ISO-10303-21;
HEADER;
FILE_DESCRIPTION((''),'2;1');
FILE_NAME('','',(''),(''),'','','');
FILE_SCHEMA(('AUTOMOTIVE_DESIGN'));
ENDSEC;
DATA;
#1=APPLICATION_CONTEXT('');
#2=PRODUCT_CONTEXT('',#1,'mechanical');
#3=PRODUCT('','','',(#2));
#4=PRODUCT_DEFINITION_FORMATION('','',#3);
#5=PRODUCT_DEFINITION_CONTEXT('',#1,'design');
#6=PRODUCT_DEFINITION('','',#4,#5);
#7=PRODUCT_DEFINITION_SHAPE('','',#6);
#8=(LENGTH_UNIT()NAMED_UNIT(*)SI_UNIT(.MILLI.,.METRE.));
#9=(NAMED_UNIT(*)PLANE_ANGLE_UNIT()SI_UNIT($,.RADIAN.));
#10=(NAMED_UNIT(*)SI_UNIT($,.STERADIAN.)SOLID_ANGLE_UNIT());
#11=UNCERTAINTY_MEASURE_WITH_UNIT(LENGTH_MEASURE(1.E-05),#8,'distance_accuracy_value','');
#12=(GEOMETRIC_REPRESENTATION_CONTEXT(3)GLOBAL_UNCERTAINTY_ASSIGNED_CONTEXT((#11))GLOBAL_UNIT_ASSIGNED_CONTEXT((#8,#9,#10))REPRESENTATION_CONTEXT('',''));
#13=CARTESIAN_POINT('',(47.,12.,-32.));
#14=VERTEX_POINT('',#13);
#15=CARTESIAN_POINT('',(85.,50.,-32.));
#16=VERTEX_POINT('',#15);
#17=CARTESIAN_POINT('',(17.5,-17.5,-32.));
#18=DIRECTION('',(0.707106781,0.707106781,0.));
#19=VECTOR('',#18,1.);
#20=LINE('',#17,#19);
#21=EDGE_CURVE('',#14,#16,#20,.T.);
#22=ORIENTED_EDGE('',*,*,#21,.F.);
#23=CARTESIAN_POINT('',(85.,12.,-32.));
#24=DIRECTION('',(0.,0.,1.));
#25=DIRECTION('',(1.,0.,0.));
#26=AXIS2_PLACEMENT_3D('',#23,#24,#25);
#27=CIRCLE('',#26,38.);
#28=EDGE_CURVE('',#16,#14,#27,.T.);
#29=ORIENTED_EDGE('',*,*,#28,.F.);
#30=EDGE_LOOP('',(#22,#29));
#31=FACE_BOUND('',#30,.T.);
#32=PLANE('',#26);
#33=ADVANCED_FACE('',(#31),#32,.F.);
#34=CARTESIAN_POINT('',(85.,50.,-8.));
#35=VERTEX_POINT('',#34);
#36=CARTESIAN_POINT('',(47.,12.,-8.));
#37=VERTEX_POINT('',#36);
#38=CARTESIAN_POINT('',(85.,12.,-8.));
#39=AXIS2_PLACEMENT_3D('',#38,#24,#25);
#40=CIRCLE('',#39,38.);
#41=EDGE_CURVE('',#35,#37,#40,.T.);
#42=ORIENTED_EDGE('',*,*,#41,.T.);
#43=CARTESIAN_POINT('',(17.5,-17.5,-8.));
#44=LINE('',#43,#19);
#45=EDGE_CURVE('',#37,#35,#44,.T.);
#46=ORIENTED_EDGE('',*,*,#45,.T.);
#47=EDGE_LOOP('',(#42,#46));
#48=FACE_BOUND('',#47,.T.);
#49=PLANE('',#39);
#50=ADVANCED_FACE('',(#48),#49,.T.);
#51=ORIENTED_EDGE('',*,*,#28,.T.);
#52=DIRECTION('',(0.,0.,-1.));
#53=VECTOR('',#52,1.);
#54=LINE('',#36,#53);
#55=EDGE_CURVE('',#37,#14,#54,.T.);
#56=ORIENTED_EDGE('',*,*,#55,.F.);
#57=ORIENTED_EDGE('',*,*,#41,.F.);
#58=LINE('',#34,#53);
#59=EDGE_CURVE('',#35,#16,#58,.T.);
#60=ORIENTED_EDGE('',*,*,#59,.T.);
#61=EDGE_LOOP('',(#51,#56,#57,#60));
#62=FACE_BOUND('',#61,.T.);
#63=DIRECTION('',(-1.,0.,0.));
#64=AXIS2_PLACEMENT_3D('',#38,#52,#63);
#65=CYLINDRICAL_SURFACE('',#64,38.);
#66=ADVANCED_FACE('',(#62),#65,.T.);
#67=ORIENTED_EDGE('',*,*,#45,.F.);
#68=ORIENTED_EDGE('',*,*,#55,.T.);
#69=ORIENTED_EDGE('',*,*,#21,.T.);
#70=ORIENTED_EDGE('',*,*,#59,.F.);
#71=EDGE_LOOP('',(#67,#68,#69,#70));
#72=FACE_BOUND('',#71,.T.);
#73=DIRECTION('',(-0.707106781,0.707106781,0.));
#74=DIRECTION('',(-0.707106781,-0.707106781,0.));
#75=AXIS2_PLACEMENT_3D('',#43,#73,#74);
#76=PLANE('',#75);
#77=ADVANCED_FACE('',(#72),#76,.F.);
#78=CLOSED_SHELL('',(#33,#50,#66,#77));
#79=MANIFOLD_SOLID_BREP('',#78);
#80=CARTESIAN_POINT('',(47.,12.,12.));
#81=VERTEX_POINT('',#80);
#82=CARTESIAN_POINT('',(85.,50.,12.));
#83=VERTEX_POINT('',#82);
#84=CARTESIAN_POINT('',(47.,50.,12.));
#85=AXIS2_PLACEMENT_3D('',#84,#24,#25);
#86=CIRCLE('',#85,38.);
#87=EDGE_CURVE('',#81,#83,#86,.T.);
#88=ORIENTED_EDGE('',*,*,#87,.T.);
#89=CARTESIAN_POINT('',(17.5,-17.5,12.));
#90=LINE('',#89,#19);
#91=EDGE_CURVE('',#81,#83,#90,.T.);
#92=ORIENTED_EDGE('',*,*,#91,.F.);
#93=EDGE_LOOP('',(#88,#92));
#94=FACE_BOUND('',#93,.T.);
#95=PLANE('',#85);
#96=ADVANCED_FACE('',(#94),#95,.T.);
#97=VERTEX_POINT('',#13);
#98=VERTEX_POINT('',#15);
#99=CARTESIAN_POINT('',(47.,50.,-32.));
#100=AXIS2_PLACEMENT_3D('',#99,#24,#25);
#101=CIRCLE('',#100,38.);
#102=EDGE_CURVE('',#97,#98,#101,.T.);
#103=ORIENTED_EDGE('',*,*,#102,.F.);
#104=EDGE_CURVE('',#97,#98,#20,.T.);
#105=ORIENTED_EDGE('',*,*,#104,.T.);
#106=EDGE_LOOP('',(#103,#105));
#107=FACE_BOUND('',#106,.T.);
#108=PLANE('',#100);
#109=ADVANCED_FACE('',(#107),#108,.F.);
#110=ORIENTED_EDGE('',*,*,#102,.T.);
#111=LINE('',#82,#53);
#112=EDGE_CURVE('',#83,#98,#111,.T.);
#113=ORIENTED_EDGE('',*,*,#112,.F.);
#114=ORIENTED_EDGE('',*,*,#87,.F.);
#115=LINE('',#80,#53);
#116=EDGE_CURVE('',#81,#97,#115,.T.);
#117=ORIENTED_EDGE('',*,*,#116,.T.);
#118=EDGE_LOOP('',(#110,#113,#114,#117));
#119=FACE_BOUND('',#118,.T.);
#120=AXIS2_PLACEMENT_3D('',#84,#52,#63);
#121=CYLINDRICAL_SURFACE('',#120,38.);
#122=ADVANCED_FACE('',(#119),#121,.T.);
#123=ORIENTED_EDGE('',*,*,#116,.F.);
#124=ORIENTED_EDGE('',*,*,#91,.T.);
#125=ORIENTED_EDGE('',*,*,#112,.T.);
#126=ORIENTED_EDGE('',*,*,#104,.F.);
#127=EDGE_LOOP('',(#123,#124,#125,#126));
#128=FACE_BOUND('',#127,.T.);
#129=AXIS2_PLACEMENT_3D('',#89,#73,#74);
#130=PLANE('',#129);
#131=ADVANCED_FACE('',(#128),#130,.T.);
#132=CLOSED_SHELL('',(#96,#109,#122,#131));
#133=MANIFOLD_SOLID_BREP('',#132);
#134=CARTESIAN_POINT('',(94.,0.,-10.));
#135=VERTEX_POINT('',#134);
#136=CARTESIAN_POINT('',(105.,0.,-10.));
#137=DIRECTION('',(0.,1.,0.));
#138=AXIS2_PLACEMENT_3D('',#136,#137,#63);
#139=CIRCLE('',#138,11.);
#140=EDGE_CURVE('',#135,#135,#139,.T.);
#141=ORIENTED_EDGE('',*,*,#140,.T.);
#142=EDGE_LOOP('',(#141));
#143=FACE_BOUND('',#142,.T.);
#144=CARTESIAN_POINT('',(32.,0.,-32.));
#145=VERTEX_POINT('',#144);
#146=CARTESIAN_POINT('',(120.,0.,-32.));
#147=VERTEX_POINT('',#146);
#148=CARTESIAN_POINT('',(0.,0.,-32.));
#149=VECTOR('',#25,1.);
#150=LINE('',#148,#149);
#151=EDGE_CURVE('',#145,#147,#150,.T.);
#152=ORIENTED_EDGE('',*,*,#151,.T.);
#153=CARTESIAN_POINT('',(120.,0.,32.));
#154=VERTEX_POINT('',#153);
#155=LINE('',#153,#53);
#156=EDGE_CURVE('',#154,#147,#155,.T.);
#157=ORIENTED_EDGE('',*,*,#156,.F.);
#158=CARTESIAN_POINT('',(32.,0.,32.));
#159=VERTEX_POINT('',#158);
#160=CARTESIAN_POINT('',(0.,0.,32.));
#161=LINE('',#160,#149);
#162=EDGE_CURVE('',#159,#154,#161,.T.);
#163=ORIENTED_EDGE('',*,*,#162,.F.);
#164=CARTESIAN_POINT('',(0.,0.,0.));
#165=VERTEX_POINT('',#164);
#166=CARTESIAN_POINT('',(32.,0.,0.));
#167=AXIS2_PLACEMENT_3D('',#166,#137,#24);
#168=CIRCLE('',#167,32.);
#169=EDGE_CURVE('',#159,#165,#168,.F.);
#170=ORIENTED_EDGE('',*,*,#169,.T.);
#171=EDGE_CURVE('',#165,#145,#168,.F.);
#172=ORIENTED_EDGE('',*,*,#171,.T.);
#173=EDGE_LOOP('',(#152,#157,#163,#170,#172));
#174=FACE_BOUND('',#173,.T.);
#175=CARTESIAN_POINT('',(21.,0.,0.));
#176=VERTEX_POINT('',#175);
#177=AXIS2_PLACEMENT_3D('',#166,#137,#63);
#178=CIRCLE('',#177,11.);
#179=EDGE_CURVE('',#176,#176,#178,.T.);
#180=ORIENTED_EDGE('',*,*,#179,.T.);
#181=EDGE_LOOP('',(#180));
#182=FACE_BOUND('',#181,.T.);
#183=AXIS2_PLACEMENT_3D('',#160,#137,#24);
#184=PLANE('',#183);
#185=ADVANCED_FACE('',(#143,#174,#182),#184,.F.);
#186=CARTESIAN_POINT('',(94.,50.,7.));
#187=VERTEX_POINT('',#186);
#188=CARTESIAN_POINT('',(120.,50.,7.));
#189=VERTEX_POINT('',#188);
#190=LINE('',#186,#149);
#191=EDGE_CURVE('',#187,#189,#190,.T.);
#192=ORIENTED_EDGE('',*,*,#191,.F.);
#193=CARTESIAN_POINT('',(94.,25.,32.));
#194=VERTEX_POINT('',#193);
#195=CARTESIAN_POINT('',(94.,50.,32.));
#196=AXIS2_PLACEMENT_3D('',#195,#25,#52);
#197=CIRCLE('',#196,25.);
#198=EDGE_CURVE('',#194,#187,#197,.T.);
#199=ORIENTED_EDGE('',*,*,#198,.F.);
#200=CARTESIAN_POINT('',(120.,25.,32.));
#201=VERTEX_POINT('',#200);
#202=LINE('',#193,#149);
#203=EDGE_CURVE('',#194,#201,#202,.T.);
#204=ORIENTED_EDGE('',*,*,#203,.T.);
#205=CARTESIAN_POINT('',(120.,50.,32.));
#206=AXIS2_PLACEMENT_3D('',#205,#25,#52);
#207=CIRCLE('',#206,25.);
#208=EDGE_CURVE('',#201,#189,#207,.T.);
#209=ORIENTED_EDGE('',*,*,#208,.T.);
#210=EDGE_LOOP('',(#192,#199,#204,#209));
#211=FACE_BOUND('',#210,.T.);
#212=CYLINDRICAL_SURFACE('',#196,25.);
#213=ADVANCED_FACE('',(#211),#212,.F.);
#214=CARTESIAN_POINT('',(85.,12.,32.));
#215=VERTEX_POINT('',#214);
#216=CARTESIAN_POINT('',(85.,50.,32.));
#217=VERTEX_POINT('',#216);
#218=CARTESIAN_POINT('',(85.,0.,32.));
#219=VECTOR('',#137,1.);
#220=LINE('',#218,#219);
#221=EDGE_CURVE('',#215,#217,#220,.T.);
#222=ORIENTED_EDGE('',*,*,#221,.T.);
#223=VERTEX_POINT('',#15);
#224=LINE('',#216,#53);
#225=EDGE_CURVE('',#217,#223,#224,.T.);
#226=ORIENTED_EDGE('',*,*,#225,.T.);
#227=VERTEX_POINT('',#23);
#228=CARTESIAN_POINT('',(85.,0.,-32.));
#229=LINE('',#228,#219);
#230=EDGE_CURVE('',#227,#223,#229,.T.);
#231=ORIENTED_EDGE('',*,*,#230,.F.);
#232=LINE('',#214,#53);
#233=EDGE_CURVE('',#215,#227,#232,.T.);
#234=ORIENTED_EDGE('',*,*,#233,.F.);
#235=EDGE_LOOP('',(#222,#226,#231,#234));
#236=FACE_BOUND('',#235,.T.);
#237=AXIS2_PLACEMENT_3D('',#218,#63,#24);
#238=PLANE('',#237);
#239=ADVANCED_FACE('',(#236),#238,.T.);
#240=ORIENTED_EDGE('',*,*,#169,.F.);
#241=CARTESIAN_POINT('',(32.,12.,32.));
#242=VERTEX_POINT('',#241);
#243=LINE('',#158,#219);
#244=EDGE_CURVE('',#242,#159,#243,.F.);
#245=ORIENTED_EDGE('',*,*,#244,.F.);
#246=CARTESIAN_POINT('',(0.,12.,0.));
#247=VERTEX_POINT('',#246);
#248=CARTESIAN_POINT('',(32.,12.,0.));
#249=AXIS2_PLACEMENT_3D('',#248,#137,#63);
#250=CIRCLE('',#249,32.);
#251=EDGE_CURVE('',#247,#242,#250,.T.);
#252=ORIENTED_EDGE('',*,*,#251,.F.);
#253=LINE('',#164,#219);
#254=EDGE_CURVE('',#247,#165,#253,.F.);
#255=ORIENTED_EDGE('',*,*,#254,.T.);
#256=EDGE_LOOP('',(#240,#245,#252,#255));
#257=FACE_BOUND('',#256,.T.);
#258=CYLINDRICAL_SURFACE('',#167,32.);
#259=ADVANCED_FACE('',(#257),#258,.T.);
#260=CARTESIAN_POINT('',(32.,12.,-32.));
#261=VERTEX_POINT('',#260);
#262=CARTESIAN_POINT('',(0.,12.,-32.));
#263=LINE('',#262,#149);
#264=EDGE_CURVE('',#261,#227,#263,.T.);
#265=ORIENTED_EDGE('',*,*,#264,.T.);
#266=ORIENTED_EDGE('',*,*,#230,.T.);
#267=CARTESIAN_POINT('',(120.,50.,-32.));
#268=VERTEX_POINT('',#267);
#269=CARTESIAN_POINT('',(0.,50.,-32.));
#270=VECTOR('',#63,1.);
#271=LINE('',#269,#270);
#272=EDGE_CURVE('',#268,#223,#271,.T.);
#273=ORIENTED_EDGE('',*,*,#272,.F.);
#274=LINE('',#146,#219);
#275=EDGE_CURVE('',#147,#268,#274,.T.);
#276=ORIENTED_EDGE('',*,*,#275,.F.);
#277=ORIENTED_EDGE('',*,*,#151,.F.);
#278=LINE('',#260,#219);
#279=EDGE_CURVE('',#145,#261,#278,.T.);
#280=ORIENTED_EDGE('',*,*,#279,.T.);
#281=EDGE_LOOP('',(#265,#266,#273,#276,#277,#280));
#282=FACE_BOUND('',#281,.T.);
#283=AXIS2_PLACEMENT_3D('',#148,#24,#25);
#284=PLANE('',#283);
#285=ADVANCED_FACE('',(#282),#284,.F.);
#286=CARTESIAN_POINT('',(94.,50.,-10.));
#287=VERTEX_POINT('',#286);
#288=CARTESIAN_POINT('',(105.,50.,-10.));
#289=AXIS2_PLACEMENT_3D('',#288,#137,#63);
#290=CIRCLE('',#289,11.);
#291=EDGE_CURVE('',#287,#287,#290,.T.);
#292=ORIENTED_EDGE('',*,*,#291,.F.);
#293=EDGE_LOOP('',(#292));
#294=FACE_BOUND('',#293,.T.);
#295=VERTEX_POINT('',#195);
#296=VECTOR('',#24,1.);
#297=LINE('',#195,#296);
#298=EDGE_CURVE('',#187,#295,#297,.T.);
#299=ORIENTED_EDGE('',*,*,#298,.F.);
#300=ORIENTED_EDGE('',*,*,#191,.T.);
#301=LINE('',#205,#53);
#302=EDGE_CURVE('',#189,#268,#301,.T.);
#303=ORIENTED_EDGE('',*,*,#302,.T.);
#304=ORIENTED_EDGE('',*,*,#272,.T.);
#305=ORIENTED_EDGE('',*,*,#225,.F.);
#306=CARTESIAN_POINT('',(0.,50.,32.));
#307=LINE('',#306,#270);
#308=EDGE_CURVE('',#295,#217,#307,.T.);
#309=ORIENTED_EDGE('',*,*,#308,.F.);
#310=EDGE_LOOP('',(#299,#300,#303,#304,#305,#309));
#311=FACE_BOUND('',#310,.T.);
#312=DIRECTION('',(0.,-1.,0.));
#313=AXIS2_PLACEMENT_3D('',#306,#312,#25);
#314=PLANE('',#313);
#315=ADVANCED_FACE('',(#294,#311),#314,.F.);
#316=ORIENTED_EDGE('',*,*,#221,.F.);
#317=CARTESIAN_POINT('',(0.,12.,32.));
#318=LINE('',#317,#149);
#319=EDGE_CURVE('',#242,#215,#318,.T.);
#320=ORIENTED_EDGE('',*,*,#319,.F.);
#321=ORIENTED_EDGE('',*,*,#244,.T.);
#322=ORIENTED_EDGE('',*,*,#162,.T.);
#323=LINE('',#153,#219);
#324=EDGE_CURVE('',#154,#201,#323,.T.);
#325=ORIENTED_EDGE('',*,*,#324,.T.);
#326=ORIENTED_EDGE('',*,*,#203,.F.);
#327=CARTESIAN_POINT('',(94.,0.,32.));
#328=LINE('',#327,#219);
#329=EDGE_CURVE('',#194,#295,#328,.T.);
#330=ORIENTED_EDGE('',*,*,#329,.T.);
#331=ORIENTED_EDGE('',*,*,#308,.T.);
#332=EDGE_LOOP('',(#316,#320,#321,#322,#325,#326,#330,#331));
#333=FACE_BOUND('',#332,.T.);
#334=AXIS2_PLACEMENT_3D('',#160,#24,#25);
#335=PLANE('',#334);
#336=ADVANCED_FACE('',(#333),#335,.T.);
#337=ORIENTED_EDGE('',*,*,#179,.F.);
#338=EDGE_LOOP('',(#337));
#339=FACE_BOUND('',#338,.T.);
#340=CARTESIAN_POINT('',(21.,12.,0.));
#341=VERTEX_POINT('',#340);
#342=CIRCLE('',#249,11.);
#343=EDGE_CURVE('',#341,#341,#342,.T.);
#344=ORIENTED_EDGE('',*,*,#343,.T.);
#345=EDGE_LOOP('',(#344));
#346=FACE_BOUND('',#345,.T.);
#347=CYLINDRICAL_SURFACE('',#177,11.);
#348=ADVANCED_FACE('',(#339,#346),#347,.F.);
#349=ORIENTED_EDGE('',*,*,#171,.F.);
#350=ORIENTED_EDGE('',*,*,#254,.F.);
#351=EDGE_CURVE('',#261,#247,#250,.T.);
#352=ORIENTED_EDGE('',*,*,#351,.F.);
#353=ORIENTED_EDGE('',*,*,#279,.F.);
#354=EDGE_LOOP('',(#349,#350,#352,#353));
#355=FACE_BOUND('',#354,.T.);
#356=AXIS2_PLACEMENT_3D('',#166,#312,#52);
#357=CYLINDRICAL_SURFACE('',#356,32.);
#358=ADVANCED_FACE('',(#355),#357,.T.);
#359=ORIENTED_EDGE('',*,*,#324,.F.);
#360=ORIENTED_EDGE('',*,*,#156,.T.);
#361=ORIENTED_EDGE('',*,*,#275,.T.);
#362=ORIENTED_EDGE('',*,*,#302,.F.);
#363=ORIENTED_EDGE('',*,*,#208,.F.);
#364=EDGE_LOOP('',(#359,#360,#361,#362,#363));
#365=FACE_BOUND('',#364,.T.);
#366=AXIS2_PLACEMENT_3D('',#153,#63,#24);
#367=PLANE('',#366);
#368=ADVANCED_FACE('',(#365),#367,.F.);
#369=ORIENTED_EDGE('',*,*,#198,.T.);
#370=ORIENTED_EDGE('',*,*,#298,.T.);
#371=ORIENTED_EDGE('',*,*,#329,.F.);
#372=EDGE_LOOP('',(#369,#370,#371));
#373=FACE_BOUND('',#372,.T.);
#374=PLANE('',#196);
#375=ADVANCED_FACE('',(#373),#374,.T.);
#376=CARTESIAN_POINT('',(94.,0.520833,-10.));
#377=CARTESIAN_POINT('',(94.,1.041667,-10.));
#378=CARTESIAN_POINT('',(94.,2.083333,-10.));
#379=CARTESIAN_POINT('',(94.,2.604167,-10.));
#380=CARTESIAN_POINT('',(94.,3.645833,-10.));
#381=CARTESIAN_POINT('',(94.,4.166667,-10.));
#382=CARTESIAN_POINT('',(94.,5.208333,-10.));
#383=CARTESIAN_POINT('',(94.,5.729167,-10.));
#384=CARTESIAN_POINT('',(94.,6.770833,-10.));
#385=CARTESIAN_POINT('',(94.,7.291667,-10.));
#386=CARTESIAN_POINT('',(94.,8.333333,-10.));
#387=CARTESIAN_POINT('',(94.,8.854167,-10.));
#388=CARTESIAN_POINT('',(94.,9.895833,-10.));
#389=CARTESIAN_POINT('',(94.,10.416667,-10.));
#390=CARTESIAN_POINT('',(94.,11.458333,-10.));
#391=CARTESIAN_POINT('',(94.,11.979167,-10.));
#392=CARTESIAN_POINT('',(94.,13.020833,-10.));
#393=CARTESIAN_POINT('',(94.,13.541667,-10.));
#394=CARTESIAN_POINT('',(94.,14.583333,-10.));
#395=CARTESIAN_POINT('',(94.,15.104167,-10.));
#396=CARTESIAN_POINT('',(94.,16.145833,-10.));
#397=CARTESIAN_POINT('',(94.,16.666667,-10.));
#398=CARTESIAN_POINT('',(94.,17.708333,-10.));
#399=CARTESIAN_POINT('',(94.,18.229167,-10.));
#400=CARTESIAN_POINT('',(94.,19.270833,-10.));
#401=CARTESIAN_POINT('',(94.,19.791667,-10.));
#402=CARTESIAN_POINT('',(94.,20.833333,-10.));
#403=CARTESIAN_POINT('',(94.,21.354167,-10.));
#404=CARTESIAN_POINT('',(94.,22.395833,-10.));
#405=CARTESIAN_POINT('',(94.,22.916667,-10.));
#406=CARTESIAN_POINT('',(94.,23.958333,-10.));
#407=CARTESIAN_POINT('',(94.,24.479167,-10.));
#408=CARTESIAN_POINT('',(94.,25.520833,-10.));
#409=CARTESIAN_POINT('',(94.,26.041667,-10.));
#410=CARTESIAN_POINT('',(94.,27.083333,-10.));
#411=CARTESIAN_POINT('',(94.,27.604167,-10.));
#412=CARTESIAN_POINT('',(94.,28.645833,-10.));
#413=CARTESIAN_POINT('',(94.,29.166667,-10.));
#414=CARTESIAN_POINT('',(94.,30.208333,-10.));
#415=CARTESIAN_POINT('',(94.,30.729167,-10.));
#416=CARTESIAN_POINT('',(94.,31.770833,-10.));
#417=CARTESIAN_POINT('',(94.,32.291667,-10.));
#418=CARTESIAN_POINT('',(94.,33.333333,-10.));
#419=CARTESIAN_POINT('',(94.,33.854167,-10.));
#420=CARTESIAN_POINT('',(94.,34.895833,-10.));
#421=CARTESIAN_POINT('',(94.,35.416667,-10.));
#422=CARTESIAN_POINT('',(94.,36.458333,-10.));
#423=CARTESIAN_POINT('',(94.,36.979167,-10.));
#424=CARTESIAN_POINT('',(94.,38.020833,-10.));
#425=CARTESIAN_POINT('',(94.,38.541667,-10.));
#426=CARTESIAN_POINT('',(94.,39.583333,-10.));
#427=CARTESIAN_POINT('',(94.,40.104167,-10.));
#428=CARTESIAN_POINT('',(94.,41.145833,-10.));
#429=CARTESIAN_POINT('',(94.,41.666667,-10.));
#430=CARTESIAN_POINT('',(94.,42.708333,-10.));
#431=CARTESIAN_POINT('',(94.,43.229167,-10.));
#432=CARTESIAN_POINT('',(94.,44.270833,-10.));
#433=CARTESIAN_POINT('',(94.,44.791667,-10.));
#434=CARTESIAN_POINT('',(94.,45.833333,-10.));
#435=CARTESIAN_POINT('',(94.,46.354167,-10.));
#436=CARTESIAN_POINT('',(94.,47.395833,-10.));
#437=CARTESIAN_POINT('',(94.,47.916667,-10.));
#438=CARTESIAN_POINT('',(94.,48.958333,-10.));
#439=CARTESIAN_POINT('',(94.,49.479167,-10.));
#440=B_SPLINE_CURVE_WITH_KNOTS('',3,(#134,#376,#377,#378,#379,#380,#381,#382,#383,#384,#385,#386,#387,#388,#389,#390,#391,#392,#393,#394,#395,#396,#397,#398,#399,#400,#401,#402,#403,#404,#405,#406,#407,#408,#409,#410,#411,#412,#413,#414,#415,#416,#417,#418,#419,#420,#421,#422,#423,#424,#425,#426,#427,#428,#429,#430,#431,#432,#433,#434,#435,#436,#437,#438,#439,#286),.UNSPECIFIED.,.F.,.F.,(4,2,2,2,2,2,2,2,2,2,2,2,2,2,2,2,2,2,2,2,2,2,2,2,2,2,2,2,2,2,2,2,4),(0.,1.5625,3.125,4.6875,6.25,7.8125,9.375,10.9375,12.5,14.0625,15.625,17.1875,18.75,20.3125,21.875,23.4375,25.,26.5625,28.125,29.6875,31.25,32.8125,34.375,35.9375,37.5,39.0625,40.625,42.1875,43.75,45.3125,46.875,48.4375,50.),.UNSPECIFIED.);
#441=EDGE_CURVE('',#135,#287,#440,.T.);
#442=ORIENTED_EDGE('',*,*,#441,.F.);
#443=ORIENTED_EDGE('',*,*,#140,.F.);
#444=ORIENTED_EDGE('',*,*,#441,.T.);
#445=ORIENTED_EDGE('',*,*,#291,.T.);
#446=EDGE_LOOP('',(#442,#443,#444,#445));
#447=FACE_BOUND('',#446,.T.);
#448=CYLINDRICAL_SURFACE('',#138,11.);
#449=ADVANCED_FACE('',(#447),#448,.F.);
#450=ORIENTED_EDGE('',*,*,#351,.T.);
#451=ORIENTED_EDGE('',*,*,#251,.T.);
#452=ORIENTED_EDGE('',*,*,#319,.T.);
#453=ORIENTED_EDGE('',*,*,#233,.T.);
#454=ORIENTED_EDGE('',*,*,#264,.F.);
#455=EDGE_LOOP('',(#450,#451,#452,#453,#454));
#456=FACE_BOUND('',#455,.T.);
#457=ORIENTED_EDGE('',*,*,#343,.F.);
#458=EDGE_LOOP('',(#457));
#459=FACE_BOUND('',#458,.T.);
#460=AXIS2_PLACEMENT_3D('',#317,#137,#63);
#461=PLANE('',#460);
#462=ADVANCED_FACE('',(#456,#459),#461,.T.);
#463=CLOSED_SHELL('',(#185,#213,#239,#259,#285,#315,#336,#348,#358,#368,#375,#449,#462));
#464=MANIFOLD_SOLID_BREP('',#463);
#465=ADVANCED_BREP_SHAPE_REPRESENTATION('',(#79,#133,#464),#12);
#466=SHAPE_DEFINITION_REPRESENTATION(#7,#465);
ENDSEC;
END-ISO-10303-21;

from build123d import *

# Parameters (mm, degrees)
SKETCH1_W           = 26
SKETCH1_H           = 25
BOSS_EXTRUDE1_DEPTH = 32
BOSS_EXTRUDE2_START = -32
BOSS_EXTRUDE2_DEPTH = 24
BOSS_EXTRUDE3_START = 12
BOSS_EXTRUDE3_DEPTH = 44
SKETCH2_R           = 25
CUT_EXTRUDE2_DEPTH  = 26
SKETCH3_R           = 11
CUT_EXTRUDE3_DEPTH  = 130.87686476
FILLET1_R           = 32
SKETCH4_R           = 11
CUT_EXTRUDE4_DEPTH  = 134.880543769


with BuildPart() as part:
    # Sketch1 → Boss-Extrude1 (new, symmetric)
    with BuildSketch(Plane.XY):
        Polygon((120, 12), (85, 12), (47, 12), (0, 12), (0, 0), (120, 0), align=None)
        Polygon((85, 50), (85, 12), (120, 12), (120, 25), (94, 25), (94, 50), align=None)
        with Locations((107, 37.5)):
            Rectangle(SKETCH1_W, SKETCH1_H)
    extrude(amount=BOSS_EXTRUDE1_DEPTH, both=True)

    # Sketch2 → Cut-Extrude2 (cut)
    with BuildSketch(Plane(origin=(120, 0, 0), x_dir=(0, 0, -1), z_dir=(1, 0, 0))):
        with Locations((-32, 50)):
            Circle(SKETCH2_R)
    extrude(amount=-CUT_EXTRUDE2_DEPTH, mode=Mode.SUBTRACT)

    # Sketch3 → Cut-Extrude3 (cut, through all)
    with BuildSketch(Plane(origin=(0, 12, 0), x_dir=(1, 0, 0), z_dir=(0, 1, 0))):
        with Locations(Location((32, 0, 0), (0, 0, 180))):
            Circle(SKETCH3_R)
    extrude(amount=-CUT_EXTRUDE3_DEPTH, mode=Mode.SUBTRACT)

    # Fillet1
    fillet1_edges = [part.edges().sort_by_distance(p)[0] for p in [
        (0, 6, -32),
        (0, 6, 32),
    ]]
    fillet(fillet1_edges, radius=FILLET1_R - 0.0001)  # a hair under: the kernel refuses the full size

    # Sketch4 → Cut-Extrude4 (cut, through all)
    with BuildSketch(Plane(origin=(0, 50, 0), x_dir=(1, 0, 0), z_dir=(0, 1, 0))):
        with Locations(Location((105, 10, 0), (0, 0, 180))):
            Circle(SKETCH4_R)
    extrude(amount=-CUT_EXTRUDE4_DEPTH, mode=Mode.SUBTRACT)


with BuildPart() as body_2:
    # Sketch1<3> → Boss-Extrude2 (new body)
    with BuildSketch(Plane.XY.offset(BOSS_EXTRUDE2_START)):
        with BuildLine():
            ThreePointArc((47, 12), (58.129942315, 38.870057685), (85, 50))
            Line((85, 50), (47, 12))
        make_face()
    extrude(amount=BOSS_EXTRUDE2_DEPTH)


with BuildPart() as body_3:
    # Sketch1<4> → Boss-Extrude3 (new body)
    with BuildSketch(Plane.XY.offset(BOSS_EXTRUDE3_START)):
        with BuildLine():
            Line((47, 12), (85, 50))
            ThreePointArc((85, 50), (73.870057685, 23.129942315), (47, 12))
        make_face()
    extrude(amount=-BOSS_EXTRUDE3_DEPTH)


solid = Compound([part.part, body_2.part, body_3.part])
